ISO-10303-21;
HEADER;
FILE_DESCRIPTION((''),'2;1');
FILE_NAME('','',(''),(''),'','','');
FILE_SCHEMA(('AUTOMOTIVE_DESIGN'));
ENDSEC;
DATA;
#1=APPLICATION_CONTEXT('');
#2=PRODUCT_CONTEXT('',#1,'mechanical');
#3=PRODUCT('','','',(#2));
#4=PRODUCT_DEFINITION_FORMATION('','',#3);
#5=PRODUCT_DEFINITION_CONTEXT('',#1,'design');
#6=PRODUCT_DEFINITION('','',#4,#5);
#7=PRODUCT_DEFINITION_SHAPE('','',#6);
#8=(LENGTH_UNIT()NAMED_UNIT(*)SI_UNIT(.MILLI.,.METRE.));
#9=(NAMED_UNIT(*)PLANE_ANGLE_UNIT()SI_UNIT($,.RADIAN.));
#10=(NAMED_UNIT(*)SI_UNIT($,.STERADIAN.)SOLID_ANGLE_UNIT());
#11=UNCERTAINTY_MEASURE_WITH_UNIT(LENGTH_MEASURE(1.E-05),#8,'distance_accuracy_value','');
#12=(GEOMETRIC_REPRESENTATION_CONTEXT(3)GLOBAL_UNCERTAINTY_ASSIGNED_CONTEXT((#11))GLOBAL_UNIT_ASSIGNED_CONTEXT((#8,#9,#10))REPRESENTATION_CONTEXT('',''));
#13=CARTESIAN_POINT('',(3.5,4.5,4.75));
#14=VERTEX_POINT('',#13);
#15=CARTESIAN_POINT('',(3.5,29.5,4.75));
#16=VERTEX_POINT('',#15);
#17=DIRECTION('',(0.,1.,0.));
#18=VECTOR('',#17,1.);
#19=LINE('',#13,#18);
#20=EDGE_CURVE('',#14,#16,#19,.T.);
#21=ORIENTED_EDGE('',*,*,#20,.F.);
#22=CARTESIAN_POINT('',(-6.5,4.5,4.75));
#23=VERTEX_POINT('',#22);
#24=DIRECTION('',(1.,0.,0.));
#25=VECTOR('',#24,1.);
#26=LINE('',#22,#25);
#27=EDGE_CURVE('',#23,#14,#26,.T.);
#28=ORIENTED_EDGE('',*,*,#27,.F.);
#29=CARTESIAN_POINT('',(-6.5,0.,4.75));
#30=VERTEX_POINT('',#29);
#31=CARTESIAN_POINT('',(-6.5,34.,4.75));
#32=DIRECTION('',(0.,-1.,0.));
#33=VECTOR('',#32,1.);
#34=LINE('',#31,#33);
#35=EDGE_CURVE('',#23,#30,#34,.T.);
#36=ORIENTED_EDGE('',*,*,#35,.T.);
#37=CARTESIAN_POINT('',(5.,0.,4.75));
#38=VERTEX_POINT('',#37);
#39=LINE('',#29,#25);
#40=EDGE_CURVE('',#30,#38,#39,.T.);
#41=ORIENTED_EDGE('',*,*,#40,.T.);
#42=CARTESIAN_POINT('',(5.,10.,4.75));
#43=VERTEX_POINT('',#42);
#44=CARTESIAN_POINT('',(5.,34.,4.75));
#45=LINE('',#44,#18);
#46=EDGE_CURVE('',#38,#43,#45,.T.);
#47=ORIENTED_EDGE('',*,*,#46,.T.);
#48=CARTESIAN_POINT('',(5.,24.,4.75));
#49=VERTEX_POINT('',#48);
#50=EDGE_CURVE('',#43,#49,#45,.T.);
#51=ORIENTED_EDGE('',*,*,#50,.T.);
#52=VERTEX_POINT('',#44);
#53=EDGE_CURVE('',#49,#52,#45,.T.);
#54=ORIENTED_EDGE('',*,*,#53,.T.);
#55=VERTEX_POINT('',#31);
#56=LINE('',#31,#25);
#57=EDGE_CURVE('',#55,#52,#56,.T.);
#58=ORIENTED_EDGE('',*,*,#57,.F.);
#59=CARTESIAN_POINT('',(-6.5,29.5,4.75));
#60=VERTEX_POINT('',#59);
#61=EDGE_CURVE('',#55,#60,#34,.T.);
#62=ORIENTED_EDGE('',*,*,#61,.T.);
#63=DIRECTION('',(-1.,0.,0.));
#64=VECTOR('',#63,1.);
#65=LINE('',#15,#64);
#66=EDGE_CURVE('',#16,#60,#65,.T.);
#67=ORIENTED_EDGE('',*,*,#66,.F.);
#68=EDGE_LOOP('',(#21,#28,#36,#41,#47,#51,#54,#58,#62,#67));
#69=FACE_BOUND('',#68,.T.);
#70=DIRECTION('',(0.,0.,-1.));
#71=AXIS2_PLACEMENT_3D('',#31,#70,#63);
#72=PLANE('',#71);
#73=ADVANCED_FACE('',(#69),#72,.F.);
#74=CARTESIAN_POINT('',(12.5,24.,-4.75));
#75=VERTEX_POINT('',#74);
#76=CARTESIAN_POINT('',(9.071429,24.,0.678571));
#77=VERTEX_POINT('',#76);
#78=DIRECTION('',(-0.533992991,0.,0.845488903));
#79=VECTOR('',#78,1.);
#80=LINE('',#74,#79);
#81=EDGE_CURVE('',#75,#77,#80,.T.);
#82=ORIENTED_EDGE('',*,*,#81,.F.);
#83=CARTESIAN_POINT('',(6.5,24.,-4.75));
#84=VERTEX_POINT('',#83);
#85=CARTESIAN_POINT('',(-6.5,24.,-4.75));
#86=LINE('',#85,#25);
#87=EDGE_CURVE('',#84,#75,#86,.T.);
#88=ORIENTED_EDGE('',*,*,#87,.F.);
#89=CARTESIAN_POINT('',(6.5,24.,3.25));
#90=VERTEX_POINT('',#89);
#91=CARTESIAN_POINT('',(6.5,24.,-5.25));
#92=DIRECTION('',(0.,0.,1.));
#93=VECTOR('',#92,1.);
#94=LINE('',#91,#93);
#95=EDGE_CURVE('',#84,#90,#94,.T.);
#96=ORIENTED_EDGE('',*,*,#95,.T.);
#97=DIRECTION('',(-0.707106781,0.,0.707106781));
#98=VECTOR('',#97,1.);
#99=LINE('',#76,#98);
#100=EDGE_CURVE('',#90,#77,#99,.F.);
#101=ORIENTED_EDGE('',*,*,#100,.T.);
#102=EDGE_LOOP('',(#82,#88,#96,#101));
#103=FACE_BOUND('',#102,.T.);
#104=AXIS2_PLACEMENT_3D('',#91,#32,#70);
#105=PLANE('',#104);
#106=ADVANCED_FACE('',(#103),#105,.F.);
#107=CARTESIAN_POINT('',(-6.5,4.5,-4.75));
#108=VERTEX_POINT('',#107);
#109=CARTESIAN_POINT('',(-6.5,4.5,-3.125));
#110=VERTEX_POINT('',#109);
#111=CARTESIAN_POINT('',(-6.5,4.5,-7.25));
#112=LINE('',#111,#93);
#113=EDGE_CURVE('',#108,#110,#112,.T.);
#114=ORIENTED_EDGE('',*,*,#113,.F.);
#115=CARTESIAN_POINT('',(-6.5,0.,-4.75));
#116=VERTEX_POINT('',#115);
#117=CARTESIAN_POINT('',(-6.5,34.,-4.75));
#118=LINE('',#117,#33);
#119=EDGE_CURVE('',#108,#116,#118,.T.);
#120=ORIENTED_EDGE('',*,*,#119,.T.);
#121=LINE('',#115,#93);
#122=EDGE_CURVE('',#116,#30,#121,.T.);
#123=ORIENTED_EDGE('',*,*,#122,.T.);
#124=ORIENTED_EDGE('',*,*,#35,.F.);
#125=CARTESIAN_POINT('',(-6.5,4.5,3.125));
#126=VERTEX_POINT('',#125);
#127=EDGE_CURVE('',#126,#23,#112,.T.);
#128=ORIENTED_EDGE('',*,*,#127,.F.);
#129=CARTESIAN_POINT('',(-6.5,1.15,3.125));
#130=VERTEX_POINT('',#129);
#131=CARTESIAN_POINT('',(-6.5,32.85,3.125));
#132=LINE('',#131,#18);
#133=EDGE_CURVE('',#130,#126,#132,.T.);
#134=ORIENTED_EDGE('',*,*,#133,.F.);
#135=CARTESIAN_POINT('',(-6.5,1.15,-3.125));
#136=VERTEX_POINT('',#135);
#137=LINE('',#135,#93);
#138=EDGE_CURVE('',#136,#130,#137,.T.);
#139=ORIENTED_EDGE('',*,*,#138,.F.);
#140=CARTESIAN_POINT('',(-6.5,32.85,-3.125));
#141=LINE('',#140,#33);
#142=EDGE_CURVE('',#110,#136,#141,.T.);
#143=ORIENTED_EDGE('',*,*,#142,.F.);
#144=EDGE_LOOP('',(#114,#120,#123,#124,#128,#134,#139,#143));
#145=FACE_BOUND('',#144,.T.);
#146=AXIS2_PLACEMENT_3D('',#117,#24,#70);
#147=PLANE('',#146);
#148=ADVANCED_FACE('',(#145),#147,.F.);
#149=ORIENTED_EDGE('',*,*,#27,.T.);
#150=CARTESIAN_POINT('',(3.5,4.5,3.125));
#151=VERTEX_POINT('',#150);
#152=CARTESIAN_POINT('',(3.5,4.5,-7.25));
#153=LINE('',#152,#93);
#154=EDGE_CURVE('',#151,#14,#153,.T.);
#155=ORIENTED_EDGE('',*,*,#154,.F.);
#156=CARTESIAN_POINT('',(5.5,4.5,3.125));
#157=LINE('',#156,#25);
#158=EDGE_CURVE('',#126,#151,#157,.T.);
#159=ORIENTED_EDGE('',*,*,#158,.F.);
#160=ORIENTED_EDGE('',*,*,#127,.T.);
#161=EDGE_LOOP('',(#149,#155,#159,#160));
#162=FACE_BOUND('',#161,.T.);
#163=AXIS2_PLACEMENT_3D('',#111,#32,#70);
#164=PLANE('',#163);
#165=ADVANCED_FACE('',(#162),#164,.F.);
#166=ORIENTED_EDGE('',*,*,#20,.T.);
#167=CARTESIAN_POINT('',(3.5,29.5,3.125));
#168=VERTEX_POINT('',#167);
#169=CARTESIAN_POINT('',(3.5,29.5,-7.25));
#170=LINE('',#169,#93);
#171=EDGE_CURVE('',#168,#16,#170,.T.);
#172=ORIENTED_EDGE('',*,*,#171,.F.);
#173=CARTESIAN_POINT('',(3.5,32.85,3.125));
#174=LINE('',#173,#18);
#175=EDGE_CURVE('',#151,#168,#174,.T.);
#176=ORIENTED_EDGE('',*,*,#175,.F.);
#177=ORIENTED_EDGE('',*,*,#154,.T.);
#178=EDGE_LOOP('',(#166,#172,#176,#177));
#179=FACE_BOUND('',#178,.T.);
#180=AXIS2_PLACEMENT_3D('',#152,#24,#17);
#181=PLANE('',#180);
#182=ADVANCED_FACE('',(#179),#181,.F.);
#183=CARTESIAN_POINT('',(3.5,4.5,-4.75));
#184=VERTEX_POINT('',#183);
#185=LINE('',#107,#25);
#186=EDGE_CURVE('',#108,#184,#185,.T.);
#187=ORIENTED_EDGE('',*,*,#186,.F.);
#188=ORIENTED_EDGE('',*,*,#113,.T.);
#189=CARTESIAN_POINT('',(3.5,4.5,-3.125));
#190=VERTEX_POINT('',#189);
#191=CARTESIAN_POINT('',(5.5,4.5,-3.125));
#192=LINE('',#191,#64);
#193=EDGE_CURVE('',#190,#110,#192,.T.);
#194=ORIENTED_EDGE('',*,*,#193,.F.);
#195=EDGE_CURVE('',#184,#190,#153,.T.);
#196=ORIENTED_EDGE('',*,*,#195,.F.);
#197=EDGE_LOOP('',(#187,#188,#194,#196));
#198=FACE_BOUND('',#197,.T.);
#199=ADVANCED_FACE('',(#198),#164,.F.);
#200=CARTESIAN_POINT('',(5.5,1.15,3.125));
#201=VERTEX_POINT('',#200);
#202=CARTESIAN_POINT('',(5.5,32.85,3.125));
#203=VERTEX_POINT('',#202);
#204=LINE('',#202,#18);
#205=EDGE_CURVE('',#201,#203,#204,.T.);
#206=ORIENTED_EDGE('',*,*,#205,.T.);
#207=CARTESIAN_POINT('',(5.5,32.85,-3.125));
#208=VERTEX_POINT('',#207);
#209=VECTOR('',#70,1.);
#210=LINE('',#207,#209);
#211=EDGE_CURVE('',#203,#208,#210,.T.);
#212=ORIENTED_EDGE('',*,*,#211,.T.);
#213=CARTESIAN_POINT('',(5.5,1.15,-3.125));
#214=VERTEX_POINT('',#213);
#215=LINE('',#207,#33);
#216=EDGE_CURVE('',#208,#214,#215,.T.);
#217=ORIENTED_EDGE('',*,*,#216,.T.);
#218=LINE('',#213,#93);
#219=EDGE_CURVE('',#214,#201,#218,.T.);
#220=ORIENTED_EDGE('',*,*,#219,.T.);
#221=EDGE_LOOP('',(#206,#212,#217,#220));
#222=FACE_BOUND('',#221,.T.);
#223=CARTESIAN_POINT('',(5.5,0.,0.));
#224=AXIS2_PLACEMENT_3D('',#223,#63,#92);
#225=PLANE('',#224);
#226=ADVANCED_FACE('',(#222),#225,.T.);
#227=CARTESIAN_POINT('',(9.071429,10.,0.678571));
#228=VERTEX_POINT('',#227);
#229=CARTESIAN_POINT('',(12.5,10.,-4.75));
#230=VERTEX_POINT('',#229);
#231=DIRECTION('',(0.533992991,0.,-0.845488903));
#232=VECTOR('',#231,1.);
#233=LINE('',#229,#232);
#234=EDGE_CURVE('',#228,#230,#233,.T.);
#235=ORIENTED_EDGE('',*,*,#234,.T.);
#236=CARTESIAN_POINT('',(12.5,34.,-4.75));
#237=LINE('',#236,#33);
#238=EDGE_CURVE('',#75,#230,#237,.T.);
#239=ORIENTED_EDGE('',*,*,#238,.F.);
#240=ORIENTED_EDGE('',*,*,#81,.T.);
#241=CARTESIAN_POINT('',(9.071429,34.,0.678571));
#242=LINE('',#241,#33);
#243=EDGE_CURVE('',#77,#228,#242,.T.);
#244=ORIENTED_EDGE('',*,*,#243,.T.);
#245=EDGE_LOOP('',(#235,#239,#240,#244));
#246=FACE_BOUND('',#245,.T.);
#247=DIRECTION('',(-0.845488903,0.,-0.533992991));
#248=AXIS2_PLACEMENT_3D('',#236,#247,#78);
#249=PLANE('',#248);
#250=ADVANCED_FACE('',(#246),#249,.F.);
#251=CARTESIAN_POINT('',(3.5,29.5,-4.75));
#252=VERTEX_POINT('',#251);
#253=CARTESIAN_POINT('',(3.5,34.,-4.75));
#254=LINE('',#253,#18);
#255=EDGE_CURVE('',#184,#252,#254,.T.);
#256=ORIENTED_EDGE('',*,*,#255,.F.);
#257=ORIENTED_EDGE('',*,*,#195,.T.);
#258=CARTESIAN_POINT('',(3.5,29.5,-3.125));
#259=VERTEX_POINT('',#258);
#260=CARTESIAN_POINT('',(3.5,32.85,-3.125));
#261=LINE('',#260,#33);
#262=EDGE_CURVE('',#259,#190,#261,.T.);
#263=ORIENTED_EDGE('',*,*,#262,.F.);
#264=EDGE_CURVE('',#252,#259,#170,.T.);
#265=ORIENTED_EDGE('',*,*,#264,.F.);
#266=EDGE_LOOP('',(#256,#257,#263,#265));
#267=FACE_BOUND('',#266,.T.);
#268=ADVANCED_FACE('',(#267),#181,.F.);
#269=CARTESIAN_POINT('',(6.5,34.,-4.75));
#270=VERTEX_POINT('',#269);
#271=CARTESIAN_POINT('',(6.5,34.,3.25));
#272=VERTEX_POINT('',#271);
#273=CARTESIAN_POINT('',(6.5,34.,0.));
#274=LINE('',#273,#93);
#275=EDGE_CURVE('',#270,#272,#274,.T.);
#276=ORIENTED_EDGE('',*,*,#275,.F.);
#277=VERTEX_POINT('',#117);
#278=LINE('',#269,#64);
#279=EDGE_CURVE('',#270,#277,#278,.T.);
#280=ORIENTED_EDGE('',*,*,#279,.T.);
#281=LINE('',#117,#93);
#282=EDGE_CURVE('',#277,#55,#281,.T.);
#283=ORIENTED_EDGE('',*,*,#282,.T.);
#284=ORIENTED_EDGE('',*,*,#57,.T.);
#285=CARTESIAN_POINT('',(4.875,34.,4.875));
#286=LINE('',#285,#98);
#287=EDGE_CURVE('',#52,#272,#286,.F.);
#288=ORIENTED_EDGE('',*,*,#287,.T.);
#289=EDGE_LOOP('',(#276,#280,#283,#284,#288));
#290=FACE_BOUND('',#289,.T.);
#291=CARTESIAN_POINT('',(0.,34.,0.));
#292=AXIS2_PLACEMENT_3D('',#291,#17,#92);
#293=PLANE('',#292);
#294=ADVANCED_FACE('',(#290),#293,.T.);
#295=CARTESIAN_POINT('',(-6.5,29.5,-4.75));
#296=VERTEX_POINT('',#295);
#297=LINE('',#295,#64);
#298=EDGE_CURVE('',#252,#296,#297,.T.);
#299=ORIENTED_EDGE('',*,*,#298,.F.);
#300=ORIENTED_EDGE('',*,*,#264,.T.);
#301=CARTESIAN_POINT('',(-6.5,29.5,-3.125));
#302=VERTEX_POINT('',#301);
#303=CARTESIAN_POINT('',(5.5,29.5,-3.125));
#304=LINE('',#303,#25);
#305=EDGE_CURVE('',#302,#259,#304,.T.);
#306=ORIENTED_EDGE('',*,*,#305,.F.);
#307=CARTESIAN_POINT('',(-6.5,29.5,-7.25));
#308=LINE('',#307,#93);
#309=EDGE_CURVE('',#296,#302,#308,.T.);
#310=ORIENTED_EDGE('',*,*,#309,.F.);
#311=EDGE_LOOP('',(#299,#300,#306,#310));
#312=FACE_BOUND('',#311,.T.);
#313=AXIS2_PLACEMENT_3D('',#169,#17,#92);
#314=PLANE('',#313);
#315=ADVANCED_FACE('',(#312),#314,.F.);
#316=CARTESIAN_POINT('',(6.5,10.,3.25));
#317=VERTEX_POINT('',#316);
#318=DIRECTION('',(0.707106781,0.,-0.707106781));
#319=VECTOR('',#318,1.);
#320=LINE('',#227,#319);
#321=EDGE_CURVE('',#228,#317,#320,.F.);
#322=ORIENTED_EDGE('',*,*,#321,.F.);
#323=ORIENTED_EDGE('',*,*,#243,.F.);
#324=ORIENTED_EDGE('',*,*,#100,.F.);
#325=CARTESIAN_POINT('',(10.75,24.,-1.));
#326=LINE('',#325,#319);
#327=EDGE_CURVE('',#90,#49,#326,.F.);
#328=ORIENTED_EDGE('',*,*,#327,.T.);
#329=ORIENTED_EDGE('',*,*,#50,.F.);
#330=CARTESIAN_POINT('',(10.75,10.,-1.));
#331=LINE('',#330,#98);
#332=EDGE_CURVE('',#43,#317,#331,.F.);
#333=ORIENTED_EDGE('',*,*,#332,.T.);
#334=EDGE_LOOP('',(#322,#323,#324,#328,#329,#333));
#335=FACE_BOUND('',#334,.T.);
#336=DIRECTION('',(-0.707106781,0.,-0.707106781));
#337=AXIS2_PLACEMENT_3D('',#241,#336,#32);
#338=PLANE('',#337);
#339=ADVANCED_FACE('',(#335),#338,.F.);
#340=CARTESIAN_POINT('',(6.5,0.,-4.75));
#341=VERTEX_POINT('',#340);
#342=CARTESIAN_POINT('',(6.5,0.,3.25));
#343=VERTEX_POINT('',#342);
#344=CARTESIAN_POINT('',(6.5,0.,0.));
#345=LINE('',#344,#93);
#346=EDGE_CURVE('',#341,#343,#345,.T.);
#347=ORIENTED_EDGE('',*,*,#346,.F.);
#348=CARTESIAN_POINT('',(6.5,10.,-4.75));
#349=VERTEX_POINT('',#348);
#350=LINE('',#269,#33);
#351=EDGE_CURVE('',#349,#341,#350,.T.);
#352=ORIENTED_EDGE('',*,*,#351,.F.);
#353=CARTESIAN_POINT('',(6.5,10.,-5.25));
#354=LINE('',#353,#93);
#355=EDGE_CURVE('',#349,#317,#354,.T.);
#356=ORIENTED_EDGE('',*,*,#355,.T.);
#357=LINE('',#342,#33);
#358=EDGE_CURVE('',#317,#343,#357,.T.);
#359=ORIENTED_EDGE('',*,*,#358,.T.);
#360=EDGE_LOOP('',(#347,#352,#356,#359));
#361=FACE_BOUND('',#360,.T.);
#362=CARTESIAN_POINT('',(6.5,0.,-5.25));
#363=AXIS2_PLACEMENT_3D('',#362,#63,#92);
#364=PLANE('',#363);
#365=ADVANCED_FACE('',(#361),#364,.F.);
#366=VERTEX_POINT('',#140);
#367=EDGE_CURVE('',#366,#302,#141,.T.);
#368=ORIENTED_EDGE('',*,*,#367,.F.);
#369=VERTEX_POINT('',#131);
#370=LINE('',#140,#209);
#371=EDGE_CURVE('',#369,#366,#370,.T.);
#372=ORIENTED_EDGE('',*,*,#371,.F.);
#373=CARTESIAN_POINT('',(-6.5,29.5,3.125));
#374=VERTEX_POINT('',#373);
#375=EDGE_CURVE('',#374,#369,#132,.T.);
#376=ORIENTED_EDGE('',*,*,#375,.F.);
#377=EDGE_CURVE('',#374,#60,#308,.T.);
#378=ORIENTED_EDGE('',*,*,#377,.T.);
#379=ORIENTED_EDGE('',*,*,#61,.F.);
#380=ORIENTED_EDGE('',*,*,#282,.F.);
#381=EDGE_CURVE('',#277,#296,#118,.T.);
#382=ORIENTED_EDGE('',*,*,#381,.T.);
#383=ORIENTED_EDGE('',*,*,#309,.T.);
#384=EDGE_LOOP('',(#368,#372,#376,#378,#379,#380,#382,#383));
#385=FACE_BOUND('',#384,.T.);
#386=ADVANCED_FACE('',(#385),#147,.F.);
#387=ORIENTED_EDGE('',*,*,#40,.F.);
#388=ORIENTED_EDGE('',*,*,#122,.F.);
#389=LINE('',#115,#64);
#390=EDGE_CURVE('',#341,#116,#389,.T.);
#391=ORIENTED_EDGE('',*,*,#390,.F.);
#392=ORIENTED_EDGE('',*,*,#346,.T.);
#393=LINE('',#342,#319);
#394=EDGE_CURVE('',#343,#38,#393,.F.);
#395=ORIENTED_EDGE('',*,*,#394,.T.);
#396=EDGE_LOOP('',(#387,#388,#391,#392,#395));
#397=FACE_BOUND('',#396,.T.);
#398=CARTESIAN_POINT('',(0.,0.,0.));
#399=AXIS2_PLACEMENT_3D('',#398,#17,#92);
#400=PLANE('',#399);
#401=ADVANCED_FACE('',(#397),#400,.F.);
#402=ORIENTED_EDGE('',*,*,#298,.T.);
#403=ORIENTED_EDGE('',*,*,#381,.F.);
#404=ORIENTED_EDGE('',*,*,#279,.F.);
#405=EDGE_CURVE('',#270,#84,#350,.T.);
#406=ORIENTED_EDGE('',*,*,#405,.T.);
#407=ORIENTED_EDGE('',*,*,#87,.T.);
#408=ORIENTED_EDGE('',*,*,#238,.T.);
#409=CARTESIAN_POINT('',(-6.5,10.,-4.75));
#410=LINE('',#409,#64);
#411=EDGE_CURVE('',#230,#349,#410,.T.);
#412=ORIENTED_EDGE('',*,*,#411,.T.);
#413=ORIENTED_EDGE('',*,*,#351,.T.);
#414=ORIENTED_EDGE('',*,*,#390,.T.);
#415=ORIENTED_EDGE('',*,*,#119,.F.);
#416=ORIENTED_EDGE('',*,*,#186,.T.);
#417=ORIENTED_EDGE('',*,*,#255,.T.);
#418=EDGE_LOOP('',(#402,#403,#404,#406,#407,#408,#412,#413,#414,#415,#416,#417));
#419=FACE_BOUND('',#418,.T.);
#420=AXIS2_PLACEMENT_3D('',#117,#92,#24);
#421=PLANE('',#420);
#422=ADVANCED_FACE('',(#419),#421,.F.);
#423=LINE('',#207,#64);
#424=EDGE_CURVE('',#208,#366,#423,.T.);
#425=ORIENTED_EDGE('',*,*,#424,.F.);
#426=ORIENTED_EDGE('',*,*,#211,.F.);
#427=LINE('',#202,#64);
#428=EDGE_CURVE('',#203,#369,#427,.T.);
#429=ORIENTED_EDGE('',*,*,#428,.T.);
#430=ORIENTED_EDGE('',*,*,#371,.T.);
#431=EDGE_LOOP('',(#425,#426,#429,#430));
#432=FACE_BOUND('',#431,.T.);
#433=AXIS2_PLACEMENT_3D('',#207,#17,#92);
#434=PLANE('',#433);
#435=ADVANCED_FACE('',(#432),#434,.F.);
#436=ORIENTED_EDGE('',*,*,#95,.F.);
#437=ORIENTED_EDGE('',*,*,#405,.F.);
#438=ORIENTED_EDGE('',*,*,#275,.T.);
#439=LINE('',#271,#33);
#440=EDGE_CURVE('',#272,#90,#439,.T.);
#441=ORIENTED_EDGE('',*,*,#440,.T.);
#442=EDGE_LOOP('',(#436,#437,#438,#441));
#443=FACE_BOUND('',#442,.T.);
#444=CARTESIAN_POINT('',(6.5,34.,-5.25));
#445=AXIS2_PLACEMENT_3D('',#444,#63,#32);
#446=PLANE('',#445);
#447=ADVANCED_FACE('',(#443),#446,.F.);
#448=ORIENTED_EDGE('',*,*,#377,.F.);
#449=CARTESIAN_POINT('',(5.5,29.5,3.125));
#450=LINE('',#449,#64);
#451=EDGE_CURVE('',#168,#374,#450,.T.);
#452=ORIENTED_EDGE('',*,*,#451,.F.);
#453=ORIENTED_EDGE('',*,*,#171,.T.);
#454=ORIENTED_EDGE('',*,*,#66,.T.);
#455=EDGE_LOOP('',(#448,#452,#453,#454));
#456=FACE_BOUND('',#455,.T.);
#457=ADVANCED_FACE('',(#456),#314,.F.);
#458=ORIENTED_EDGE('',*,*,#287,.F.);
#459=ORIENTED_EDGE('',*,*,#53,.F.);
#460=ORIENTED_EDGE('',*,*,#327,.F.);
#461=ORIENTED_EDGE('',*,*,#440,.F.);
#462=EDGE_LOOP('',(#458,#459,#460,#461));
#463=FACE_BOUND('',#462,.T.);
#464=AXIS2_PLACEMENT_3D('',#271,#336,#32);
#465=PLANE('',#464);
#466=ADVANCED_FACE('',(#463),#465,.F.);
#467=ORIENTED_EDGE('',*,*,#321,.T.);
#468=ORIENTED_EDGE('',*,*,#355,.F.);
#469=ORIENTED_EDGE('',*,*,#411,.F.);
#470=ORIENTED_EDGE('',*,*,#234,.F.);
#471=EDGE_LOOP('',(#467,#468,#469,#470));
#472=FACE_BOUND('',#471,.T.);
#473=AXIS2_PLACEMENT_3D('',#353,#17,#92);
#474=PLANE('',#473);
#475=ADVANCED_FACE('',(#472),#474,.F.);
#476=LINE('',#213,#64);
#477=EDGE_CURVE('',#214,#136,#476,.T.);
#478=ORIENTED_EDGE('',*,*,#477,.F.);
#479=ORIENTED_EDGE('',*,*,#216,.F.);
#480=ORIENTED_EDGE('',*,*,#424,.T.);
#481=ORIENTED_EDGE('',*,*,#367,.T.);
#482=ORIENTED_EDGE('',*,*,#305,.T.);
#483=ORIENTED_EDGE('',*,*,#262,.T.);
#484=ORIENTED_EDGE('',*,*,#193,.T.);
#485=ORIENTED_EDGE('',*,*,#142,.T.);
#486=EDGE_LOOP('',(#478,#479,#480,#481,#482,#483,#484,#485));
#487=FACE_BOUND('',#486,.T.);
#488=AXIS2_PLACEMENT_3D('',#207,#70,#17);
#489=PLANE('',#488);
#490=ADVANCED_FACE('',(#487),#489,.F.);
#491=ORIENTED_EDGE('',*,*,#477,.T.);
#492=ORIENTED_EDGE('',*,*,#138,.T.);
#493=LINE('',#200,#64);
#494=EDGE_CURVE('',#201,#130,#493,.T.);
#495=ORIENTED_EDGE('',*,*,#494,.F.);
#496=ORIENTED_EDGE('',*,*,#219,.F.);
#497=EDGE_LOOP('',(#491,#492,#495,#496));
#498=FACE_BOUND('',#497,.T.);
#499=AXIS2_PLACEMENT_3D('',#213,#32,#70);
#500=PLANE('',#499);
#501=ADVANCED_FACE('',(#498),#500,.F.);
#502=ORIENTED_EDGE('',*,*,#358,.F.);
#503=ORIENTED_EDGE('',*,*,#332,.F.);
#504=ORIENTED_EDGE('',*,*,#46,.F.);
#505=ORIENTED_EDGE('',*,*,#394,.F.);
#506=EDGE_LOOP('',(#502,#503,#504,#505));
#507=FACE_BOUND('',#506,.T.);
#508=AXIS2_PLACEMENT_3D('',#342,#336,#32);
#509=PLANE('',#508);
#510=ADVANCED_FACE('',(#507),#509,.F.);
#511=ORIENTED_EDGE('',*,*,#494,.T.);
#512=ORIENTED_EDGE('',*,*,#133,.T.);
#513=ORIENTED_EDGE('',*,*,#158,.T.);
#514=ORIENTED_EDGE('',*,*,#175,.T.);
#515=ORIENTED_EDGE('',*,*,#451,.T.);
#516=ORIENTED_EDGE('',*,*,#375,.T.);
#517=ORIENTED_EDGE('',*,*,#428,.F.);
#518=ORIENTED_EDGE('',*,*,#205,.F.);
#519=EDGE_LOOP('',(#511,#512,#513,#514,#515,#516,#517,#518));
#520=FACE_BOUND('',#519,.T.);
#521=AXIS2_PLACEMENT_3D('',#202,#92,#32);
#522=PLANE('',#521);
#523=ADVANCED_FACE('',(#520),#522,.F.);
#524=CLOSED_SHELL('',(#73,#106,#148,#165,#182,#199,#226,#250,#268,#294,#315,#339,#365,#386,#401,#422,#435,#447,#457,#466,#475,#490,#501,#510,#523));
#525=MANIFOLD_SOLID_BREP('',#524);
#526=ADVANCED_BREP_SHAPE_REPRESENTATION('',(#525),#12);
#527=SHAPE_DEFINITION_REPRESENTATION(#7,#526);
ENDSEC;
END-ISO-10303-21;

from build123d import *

# Parameters (mm, degrees)
BOSS_EXTRUDE1_DEPTH = 34
SKETCH2_W           = 6.25
SKETCH2_H           = 31.7
CUT_EXTRUDE1_DEPTH  = 12
SKETCH3_W           = 10
SKETCH3_H           = 25
CUT_EXTRUDE2_DEPTH  = 12
SKETCH4_W           = 6
SKETCH4_H           = 10
CUT_EXTRUDE3_DEPTH  = 10
CHAMFER2_SIZE       = 1.5
CHAMFER3_SIZE       = 1.5
CHAMFER4_SIZE       = 1.5
CHAMFER4_SIZE_2     = 4.815472512


with BuildPart() as part:
    # Sketch1 → Boss-Extrude1 (new body)
    with BuildSketch(Plane(origin=(0, 0, 0), x_dir=(1, 0, 0), z_dir=(0, 1, 0))):
        Polygon((6.5, 4.75), (12.5, 4.75), (6.5, -4.75), (-6.5, -4.75), (-6.5, 4.75), align=None)
    extrude(amount=BOSS_EXTRUDE1_DEPTH)

    # Sketch2 → Cut-Extrude1 (cut)
    with BuildSketch(Plane.ZY.offset(6.5)):
        with Locations((0, 17)):
            Rectangle(SKETCH2_W, SKETCH2_H)
    extrude(amount=-CUT_EXTRUDE1_DEPTH, mode=Mode.SUBTRACT)

    # Sketch3 → Cut-Extrude2 (cut)
    with BuildSketch(Plane.XY.offset(4.75)):
        with Locations((-1.5, 17)):
            Rectangle(SKETCH3_W, SKETCH3_H)
    extrude(amount=-CUT_EXTRUDE2_DEPTH, mode=Mode.SUBTRACT)

    # Sketch4 → Cut-Extrude3 (cut)
    with BuildSketch(Plane.XY.offset(4.75)):
        with Locations((9.5, 29)):
            Rectangle(SKETCH4_W, SKETCH4_H)
        with Locations((9.5, 5)):
            Rectangle(SKETCH4_W, SKETCH4_H)
    extrude(amount=-CUT_EXTRUDE3_DEPTH, mode=Mode.SUBTRACT)

    # Chamfer2
    chamfer2_edges = [part.edges().sort_by_distance(p)[0] for p in [
        (6.5, 29, 4.75),
    ]]
    chamfer(chamfer2_edges, length=CHAMFER2_SIZE)

    # Chamfer3
    chamfer3_edges = [part.edges().sort_by_distance(p)[0] for p in [
        (6.5, 5, 4.75),
    ]]
    chamfer(chamfer3_edges, length=CHAMFER3_SIZE)

    # Chamfer4
    # the kernel refuses this chamfer: 4.815472512, 1.5 mm, written as the material it takes off along each edge
    with BuildSketch(Plane(origin=(6.5, -2.508851902, 4.75), x_dir=(-0.9965532165776719, 0, 0.08295593124482357), z_dir=(0, 1, 0))) as chamfer4_piece_1:
        Polygon((CHAMFER4_SIZE * 0.996553216578, -CHAMFER4_SIZE * 0.0829559312448), (-CHAMFER4_SIZE_2 * 0.602290752459, -CHAMFER4_SIZE_2 * 0.798276799955), (0, 0), align=None)
    extrude(amount=39.017703804, mode=Mode.SUBTRACT)


solid = part.part
